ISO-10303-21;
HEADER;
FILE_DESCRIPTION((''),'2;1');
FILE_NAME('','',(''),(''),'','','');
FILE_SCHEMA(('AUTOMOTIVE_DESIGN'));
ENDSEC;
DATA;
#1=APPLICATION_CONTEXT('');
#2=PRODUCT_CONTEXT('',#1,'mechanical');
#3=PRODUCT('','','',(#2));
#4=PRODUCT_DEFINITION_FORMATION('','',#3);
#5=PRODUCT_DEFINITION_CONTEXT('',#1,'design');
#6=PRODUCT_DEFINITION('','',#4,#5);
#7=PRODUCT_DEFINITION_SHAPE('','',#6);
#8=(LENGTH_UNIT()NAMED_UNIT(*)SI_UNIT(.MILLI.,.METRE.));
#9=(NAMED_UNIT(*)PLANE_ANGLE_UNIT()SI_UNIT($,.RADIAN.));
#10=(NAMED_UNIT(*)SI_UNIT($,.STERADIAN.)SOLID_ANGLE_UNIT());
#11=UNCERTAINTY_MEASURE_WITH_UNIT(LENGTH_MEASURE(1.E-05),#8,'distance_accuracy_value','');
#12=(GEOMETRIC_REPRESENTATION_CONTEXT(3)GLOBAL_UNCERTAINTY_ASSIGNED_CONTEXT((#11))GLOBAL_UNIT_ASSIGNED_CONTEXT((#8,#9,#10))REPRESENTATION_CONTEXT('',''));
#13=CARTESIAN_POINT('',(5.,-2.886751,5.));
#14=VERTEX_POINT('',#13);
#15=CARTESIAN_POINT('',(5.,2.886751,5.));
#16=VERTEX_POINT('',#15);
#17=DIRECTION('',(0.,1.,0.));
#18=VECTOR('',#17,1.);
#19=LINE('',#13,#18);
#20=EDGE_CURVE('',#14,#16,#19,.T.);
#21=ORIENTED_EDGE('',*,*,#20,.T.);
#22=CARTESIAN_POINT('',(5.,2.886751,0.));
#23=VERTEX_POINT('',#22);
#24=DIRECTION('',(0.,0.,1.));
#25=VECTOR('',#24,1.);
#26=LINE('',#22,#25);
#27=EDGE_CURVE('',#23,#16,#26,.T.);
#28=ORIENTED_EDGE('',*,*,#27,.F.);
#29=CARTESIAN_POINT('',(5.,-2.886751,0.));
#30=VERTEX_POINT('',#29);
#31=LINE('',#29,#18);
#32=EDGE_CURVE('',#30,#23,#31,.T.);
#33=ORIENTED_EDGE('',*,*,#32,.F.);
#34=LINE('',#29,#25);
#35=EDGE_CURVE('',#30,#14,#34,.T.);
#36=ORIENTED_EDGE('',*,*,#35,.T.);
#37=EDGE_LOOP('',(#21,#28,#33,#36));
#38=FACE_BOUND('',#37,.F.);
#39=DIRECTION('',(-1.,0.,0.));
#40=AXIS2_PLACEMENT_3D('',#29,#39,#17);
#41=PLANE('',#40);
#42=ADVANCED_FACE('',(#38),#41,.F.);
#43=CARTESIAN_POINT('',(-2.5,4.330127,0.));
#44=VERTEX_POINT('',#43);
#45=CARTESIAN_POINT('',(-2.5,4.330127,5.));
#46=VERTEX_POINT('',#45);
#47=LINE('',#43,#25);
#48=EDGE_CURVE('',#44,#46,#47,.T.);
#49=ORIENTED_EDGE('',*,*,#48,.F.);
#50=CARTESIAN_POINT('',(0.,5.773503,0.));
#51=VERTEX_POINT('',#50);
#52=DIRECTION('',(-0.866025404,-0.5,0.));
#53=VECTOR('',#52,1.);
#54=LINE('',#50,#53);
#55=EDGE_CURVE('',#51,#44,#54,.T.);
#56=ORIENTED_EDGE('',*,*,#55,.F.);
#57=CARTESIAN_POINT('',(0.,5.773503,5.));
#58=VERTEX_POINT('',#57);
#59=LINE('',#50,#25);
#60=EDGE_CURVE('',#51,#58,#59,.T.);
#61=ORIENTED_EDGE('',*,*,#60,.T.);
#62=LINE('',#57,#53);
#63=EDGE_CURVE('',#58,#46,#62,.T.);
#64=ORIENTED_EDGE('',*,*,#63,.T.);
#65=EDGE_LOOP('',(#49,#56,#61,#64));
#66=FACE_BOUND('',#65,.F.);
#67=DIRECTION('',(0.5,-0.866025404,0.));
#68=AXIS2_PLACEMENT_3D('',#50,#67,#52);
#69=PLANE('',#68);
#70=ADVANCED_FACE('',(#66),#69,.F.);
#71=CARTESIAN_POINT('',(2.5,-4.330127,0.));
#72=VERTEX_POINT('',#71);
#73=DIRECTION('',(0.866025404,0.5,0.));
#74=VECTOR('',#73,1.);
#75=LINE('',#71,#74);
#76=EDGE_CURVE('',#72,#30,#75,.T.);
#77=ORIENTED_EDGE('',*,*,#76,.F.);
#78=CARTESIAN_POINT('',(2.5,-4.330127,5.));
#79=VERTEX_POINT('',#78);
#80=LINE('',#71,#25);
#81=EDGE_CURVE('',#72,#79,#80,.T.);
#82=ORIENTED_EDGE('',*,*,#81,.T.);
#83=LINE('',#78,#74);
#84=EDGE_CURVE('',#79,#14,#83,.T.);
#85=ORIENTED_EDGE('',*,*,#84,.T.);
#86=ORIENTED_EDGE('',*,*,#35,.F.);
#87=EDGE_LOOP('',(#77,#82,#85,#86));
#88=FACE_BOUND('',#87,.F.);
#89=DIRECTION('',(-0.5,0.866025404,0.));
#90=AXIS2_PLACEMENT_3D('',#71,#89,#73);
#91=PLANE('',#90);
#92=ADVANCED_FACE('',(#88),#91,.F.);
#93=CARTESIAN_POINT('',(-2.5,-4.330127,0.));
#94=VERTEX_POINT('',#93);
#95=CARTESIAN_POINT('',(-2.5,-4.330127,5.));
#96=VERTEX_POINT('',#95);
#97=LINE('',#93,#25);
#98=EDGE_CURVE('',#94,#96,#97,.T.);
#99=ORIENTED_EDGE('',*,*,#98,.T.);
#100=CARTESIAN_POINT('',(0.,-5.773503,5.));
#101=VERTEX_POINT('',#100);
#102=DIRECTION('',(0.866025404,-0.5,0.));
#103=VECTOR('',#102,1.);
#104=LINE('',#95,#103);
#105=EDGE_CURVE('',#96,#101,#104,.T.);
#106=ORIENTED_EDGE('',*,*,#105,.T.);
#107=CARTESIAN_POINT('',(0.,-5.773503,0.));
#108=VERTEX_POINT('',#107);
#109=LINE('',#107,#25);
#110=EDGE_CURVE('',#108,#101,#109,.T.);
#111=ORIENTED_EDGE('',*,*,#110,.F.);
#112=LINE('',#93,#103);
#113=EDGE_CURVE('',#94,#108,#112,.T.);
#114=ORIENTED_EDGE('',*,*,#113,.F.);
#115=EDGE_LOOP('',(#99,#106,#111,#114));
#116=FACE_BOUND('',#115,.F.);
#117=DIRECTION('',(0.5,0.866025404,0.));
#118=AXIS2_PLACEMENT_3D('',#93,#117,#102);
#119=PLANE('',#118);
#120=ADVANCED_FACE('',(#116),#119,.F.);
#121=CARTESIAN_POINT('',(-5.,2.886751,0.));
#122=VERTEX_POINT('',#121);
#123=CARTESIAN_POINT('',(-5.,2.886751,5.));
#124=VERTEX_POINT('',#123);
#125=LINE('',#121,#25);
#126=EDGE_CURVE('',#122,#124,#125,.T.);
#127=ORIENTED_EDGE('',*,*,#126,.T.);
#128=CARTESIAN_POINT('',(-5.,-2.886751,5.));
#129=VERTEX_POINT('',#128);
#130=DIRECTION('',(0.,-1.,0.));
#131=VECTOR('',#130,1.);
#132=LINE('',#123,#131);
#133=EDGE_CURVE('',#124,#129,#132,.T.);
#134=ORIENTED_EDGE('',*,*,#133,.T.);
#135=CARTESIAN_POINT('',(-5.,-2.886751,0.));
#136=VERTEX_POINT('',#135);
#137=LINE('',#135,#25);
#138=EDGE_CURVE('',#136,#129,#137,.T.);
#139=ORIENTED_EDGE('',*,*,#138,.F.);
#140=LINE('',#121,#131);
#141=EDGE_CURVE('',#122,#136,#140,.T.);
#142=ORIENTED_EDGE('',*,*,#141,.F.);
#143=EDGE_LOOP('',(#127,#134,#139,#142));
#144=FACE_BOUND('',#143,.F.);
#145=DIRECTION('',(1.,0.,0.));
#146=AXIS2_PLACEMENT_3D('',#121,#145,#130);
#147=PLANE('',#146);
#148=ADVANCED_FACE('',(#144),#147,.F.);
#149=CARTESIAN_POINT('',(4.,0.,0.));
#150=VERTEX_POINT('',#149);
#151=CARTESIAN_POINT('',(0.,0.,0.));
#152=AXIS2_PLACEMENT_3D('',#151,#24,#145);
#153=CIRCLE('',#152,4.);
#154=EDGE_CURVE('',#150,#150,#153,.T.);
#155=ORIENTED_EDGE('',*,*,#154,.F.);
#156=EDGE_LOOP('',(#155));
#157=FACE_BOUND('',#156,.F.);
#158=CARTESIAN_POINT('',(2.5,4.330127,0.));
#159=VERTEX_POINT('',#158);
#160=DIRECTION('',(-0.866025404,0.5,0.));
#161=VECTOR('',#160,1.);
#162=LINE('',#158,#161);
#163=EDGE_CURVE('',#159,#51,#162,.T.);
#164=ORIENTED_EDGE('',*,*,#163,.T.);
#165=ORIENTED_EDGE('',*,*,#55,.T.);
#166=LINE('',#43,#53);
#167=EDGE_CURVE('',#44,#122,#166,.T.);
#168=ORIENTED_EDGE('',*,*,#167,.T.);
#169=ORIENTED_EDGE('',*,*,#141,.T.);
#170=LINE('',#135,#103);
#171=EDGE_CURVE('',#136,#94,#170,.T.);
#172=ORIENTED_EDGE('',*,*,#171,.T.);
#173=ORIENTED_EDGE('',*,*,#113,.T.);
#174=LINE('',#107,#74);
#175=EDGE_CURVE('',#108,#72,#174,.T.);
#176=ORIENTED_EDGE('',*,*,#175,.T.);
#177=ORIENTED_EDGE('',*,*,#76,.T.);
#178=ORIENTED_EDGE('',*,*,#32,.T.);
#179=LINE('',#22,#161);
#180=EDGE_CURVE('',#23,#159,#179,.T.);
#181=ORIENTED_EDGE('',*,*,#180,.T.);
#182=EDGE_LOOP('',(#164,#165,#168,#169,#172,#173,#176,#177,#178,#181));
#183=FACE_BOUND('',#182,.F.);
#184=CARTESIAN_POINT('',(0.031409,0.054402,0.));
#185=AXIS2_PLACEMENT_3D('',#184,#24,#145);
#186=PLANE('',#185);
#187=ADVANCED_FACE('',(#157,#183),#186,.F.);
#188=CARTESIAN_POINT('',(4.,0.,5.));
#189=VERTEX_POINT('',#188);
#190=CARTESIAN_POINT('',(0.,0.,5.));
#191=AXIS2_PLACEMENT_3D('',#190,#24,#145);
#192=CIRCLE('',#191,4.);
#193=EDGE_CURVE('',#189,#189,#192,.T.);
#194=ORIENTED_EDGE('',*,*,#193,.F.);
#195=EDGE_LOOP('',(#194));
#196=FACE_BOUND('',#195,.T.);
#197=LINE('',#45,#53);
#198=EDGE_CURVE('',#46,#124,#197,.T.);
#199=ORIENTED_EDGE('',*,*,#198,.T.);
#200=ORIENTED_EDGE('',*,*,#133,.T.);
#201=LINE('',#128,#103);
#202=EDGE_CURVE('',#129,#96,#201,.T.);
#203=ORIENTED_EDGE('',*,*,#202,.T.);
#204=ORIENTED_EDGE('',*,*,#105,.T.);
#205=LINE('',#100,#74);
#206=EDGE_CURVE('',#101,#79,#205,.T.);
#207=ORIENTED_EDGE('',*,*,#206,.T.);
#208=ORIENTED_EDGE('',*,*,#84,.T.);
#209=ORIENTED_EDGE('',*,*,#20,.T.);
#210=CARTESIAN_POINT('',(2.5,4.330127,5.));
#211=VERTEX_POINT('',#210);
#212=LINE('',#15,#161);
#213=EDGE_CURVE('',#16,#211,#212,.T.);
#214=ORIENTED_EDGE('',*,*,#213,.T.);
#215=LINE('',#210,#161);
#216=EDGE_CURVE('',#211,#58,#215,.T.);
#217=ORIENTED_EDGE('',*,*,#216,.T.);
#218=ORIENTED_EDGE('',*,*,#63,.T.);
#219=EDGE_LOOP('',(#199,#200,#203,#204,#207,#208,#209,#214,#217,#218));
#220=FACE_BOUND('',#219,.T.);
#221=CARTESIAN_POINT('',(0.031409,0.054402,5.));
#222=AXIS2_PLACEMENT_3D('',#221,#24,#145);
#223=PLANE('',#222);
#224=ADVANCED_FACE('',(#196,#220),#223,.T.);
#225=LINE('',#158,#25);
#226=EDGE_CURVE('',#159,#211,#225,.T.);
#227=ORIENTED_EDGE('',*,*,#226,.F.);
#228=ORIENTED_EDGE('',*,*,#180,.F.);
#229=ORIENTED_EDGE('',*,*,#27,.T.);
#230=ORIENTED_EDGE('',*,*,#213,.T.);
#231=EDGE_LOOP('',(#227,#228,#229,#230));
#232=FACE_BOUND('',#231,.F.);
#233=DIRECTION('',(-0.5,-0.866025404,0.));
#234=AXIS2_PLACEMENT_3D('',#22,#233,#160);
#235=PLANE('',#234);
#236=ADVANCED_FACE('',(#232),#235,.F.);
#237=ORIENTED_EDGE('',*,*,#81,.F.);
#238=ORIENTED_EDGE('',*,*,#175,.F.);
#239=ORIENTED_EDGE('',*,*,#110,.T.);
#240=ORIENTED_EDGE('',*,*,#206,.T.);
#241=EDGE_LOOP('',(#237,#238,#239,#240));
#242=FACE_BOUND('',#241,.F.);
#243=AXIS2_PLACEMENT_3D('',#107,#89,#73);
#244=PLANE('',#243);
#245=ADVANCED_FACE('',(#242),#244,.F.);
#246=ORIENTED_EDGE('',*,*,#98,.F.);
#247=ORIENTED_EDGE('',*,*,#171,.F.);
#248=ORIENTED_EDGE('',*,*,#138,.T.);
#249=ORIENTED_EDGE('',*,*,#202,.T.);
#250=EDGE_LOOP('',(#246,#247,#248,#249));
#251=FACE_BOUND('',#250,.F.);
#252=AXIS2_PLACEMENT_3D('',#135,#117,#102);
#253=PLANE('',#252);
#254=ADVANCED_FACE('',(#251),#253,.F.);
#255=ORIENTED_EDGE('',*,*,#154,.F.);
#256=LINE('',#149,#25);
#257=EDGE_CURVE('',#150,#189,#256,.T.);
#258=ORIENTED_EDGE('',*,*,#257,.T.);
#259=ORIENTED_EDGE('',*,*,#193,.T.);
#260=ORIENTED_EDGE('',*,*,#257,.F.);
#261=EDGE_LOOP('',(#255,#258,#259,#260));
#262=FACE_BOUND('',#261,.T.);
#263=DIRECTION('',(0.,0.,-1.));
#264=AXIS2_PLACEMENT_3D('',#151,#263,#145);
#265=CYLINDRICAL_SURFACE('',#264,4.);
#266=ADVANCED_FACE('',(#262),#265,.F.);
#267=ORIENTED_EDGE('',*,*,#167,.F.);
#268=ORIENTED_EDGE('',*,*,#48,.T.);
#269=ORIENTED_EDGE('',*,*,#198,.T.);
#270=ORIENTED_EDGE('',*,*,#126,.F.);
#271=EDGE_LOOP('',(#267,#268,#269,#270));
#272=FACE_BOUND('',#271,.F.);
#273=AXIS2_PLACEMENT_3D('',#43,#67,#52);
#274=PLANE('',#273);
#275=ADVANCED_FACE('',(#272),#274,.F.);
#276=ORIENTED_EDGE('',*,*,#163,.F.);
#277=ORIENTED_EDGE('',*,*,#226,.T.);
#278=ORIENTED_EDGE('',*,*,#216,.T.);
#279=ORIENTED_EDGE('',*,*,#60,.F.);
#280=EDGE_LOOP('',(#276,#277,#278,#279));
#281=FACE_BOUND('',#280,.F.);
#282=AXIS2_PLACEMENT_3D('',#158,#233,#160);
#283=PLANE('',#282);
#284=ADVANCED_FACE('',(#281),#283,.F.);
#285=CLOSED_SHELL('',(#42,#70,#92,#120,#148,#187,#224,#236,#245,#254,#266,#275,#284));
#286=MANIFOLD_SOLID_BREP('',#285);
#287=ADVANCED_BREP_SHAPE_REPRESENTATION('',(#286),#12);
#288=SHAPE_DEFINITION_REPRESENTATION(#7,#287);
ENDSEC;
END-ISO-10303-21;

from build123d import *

# Parameters (mm, degrees)
F0_R     = 4
F1_DEPTH = 5


with BuildPart() as f1:
    # F0 (on Top) → F1 (new body)
    with BuildSketch(Plane.XY):
        with BuildLine():
            ThreePointArc((2.499999978, -4.3301270316), (4.3301270126, -2.500000011), (5, 0))
            ThreePointArc((5, 0), (4.330127022, 2.4999999946), (2.5000000107, 4.3301270127))
            ThreePointArc((2.5000000107, 4.3301270127), (-3.05e-08, 5), (-2.5000000636, 4.3301269822))
            ThreePointArc((-2.5000000636, 4.3301269822), (-4.3301270373, 2.4999999682), (-5, 0))
            ThreePointArc((-5, 0), (-4.3301270351, -2.4999999721), (-2.5000000559, -4.3301269867))
            ThreePointArc((-2.5000000559, -4.3301269867), (-4.5e-08, -5), (2.499999978, -4.3301270316))
        make_face()
        Circle(F0_R, mode=Mode.SUBTRACT)
        with BuildLine():
            Line((5, -2.8867513459), (5, 0))
            ThreePointArc((5, 0), (4.3301270126, -2.500000011), (2.499999978, -4.3301270316))
            Line((2.499999978, -4.3301270316), (5, -2.8867513459))
        make_face()
        with BuildLine():
            ThreePointArc((2.5000000107, 4.3301270127), (4.330127022, 2.4999999946), (5, 0))
            Line((5, 0), (5, 2.8867513459))
            Line((5, 2.8867513459), (2.5000000107, 4.3301270127))
        make_face()
        with BuildLine():
            ThreePointArc((-2.5000000636, 4.3301269822), (-3.05e-08, 5), (2.5000000107, 4.3301270127))
            Line((2.5000000107, 4.3301270127), (0, 5.7735026919))
            Line((0, 5.7735026919), (-2.5000000636, 4.3301269822))
        make_face()
        with BuildLine():
            Line((0, -5.7735026919), (2.499999978, -4.3301270316))
            ThreePointArc((2.499999978, -4.3301270316), (-4.5e-08, -5), (-2.5000000559, -4.3301269867))
            Line((-2.5000000559, -4.3301269867), (0, -5.7735026919))
        make_face()
        with BuildLine():
            ThreePointArc((-5, 0), (-4.3301270373, 2.4999999682), (-2.5000000636, 4.3301269822))
            Line((-2.5000000636, 4.3301269822), (-5, 2.8867513459))
            Line((-5, 2.8867513459), (-5, 0))
        make_face()
        with BuildLine():
            Line((-5, -2.8867513459), (-2.5000000559, -4.3301269867))
            ThreePointArc((-2.5000000559, -4.3301269867), (-4.3301270351, -2.4999999721), (-5, 0))
            Line((-5, 0), (-5, -2.8867513459))
        make_face()
    extrude(amount=F1_DEPTH)


solid = f1.part
